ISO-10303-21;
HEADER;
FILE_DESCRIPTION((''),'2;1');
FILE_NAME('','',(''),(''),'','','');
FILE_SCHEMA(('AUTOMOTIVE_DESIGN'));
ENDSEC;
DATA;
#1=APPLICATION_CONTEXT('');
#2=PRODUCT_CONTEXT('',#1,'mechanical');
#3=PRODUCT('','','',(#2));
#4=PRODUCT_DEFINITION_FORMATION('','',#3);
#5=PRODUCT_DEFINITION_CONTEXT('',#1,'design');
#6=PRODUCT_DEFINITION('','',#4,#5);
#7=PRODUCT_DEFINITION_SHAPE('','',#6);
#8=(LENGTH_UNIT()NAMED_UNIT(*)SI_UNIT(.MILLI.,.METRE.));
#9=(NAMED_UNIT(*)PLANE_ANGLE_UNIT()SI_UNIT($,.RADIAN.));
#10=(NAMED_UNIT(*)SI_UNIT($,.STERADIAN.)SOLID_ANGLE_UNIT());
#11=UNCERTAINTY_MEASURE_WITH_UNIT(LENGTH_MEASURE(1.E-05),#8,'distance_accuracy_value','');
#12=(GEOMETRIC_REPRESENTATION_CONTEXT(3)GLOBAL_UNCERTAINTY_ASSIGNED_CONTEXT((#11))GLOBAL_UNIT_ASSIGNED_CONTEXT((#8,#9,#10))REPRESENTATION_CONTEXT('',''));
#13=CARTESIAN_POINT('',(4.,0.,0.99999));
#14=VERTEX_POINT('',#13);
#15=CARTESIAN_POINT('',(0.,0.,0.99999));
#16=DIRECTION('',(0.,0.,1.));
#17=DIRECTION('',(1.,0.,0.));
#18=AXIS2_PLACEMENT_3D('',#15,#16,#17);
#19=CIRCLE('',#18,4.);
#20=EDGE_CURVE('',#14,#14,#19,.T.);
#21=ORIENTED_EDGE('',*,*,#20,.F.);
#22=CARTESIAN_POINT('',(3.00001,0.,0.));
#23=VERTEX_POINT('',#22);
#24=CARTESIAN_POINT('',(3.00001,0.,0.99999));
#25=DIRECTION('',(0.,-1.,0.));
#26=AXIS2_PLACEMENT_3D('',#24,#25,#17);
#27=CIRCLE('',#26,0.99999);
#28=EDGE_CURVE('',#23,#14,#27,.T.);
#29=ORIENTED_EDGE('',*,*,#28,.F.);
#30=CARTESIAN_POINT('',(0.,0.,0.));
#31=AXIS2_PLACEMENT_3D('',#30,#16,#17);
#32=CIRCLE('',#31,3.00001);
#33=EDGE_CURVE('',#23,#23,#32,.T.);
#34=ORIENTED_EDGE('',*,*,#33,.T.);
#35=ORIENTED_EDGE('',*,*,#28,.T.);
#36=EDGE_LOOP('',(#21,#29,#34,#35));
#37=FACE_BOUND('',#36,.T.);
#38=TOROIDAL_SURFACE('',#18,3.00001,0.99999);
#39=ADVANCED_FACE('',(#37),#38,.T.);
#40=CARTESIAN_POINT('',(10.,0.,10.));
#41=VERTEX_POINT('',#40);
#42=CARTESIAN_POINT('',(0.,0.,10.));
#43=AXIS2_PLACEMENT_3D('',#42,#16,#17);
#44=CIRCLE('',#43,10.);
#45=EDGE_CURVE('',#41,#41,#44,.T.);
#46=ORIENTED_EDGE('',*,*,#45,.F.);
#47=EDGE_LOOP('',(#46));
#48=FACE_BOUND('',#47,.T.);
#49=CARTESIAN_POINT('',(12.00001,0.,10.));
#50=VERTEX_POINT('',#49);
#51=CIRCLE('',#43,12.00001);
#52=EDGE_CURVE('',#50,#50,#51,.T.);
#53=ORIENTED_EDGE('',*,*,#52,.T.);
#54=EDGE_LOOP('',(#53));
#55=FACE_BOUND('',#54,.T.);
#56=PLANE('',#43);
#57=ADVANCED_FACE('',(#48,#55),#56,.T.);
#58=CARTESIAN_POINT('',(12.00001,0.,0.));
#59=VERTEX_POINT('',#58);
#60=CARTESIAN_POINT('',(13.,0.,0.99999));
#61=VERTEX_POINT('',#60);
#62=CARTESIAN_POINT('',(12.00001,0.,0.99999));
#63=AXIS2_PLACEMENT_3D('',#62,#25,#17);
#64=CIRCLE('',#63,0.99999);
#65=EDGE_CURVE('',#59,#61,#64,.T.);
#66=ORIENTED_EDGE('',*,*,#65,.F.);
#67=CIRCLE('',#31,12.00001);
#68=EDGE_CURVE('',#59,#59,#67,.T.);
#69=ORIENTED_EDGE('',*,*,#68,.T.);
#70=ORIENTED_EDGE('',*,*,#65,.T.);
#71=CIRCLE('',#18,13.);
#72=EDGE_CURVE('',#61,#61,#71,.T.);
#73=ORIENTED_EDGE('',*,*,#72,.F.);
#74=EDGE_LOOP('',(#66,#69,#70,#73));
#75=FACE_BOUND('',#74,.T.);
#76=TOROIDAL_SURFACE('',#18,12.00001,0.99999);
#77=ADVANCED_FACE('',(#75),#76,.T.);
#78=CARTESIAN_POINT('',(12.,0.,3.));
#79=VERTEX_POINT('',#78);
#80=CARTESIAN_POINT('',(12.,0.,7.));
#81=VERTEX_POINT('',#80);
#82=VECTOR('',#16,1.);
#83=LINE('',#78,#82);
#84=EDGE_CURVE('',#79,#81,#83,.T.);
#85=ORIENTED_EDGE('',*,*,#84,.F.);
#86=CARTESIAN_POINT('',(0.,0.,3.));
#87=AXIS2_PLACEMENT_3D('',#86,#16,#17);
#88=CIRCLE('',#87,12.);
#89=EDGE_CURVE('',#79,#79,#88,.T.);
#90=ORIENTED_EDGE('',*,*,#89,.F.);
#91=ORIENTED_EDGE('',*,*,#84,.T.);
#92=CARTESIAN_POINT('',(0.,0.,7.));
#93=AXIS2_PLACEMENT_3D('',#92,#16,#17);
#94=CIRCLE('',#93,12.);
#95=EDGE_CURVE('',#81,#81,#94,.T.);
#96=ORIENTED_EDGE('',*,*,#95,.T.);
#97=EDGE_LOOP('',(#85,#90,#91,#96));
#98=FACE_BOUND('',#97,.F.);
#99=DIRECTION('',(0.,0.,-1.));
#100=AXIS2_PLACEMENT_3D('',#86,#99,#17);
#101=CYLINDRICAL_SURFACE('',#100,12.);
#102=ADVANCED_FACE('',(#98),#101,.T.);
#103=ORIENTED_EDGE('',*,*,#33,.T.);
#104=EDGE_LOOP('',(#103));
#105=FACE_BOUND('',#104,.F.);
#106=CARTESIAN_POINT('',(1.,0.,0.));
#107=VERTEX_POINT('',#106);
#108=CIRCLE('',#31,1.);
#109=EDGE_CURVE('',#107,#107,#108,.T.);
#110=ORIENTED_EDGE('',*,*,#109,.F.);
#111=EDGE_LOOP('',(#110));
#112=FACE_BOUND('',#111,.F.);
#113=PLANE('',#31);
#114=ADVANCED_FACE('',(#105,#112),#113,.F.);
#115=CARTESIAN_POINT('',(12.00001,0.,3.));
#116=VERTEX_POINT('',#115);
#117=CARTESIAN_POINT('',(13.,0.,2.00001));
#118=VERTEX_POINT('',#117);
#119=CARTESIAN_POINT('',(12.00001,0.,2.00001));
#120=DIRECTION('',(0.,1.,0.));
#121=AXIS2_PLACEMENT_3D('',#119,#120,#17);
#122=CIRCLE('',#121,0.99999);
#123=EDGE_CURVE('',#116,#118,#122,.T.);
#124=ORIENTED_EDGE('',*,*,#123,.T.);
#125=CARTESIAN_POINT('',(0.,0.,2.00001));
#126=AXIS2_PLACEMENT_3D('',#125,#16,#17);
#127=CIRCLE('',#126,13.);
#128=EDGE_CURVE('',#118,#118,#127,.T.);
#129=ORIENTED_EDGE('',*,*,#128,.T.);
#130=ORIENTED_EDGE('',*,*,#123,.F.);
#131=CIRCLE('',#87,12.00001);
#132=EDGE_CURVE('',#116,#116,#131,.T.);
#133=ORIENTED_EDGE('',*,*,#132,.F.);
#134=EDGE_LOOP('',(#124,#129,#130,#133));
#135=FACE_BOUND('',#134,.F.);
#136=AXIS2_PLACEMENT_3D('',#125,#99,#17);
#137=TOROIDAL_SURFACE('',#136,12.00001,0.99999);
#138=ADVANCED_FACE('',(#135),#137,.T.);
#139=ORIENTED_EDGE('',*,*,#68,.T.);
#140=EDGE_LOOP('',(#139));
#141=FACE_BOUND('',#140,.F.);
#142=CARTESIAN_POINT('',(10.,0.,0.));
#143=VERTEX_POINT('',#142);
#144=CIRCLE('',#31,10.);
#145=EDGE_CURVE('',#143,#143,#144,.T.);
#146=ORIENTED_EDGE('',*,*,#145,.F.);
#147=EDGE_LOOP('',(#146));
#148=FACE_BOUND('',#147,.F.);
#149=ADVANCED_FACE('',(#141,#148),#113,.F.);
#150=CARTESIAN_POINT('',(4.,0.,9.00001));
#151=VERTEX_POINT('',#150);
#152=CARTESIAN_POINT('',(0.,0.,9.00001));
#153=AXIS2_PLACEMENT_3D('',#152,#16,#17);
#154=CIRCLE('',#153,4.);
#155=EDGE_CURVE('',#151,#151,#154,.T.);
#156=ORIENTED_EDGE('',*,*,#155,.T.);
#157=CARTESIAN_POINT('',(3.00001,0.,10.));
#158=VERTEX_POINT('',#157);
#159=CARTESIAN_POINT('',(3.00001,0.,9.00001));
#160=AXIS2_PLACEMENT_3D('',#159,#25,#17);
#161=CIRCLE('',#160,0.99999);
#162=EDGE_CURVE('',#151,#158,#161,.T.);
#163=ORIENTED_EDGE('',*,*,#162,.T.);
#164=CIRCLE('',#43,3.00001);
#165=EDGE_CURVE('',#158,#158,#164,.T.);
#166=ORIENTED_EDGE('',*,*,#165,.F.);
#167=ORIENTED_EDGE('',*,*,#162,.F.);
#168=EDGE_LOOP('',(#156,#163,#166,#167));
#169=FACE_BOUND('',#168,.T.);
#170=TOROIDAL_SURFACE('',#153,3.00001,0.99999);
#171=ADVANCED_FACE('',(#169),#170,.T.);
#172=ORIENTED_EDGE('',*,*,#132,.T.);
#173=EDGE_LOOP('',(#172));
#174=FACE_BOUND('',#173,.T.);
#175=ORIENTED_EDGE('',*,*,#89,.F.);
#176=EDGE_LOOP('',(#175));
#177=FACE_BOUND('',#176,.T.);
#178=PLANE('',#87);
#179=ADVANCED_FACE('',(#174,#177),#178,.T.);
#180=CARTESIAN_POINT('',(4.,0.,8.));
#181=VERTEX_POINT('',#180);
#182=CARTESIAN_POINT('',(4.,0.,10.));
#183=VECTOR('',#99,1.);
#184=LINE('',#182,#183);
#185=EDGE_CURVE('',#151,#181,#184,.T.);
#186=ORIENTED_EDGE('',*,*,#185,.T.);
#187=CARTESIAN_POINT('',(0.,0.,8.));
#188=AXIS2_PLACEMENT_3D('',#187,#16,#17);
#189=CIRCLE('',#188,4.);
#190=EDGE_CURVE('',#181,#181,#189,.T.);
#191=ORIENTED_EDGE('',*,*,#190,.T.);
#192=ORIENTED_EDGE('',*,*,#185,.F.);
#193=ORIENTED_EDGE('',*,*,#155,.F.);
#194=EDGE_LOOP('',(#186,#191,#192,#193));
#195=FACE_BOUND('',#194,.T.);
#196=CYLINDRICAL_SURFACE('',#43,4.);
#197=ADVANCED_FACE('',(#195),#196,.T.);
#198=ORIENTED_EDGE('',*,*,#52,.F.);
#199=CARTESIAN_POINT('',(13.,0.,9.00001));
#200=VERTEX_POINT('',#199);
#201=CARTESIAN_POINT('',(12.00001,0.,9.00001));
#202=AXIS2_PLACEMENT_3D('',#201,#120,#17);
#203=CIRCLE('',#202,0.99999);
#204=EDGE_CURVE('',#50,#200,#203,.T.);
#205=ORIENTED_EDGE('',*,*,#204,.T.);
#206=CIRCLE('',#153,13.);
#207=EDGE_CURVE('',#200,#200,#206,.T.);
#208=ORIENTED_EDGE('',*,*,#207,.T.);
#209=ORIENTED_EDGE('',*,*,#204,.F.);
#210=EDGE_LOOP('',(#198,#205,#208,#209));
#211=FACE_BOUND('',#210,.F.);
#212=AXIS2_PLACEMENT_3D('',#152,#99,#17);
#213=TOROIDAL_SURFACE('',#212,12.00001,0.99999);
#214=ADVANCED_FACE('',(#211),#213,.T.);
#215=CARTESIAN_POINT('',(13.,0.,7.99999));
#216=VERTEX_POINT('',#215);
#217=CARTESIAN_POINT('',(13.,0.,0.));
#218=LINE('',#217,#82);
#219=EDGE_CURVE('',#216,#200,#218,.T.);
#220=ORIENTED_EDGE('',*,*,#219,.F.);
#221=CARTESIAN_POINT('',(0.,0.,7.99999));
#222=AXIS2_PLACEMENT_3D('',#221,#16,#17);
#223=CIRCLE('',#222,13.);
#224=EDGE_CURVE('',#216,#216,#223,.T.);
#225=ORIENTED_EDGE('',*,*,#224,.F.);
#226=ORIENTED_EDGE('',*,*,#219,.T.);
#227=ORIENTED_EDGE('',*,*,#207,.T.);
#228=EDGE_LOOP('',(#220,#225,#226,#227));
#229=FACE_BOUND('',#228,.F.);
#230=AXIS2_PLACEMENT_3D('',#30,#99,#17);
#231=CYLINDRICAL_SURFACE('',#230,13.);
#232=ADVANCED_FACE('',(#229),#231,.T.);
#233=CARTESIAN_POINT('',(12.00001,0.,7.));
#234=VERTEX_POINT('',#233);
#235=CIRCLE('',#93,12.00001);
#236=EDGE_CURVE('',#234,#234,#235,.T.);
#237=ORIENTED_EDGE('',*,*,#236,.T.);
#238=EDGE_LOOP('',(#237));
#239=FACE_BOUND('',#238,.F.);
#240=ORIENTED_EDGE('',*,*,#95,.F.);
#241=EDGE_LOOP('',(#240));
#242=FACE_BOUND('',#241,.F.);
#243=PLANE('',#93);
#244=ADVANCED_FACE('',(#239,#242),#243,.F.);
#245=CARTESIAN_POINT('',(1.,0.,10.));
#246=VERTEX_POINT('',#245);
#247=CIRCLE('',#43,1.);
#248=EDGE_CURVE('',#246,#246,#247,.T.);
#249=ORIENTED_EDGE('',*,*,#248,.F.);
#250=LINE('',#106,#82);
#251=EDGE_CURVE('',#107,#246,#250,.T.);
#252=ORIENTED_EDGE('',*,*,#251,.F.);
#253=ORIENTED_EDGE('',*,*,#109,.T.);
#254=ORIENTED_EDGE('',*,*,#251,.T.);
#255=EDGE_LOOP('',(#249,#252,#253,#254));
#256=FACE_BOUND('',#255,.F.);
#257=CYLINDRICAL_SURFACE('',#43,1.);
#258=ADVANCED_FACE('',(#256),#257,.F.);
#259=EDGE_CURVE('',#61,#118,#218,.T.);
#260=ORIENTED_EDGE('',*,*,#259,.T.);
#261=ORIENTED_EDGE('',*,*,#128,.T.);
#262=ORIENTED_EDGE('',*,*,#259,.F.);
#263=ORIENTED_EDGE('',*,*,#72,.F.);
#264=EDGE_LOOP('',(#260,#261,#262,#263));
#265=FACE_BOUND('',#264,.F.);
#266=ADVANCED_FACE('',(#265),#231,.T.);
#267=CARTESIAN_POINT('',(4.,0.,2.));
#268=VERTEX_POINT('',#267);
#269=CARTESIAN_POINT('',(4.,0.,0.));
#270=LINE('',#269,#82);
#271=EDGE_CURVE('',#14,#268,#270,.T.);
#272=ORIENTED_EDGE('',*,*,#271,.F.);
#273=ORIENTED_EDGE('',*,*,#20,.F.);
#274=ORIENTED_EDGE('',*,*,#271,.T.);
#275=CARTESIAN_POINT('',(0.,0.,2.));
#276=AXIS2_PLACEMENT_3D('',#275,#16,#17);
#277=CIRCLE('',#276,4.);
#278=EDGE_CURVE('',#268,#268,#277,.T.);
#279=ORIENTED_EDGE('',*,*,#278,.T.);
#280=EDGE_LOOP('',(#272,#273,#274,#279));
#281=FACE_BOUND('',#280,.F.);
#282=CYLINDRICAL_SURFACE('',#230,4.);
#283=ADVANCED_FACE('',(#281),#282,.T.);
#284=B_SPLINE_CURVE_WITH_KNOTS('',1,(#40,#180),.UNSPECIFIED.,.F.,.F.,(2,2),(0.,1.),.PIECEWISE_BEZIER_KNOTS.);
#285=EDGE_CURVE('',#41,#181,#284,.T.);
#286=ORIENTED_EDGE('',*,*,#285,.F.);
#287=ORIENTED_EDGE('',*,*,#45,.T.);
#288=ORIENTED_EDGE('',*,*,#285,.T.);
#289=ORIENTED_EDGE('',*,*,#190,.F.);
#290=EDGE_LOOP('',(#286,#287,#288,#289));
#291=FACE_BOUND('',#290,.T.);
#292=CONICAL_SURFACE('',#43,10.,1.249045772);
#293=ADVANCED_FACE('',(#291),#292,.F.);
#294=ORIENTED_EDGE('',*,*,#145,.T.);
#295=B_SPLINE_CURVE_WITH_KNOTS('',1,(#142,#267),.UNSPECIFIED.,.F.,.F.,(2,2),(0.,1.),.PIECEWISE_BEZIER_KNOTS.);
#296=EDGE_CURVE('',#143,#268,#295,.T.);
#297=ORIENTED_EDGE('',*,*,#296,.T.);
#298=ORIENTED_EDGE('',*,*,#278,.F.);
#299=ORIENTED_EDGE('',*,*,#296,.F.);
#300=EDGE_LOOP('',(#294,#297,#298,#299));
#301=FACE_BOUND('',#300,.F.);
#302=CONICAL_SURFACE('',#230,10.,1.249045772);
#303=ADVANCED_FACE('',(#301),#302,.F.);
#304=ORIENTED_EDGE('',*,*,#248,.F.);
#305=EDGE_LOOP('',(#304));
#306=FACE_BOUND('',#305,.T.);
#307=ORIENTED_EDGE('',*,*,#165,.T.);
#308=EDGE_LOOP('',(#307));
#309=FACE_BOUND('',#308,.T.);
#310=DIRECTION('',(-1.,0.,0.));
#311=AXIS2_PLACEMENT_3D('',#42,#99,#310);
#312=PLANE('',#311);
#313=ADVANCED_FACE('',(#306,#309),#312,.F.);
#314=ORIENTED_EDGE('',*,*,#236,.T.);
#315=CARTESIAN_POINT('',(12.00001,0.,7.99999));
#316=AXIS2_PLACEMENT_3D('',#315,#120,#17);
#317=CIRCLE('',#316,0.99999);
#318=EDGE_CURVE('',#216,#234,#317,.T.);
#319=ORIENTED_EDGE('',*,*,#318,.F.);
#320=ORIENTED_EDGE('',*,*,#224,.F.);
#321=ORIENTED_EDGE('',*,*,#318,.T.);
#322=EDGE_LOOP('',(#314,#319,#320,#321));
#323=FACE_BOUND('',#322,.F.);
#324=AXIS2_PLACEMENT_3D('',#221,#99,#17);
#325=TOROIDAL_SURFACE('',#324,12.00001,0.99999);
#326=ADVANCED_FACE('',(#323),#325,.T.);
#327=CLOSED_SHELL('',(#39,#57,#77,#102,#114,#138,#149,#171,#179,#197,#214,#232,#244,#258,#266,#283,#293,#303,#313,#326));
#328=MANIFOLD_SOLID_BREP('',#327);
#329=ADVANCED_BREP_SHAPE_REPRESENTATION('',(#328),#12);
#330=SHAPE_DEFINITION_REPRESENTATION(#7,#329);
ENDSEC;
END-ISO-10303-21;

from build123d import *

# Parameters (mm, degrees)
F0_R      = 13
F0_R_2    = 1
F1_DEPTH  = 10
F4_R      = 10
F3_R      = 4
F8_R      = 10
F7_R      = 4
F11_R     = 4
F11_R_2   = 1
F12_DEPTH = 2
F14_R     = 13
F14_R_2   = 12
F15_DEPTH = 4
F16_R     = 0.99999


# Not quite as in the source:
# - a fillet or chamfer is up to 0.001 mm smaller than in the source, because OpenCascade refuses the exact size
# - a feature of the source that left no trace in its solid (it failed there, or was rolled back) is left out
# - a pattern or mirror of a feature is missing from the dataset's text; its kind, count and spacing are read off the source's solid


with BuildPart() as f1:
    # F0 (on Top) → F1 (new body)
    with BuildSketch(Plane.XY):
        Circle(F0_R)
        Circle(F0_R_2, mode=Mode.SUBTRACT)
    extrude(amount=F1_DEPTH)

    # F4 (on face) → F5 section 0
    with BuildSketch(Plane.XY.offset(10)):
        Circle(F4_R)
    # F3 (on offset) → F5 section 1
    with BuildSketch(Plane.XY.offset(8)):
        Circle(F3_R)
    loft(mode=Mode.SUBTRACT)

    # F8 (on face) → F9 section 0
    with BuildSketch(Plane.XY):
        Circle(F8_R)
    # F7 (on offset) → F9 section 1
    with BuildSketch(Plane.XY.offset(2)):
        Circle(F7_R)
    loft(mode=Mode.SUBTRACT)

    # F11 (on face) → F12 (join, through all)
    with BuildSketch(Plane.XY):
        Circle(F11_R)
        Circle(F11_R_2, mode=Mode.SUBTRACT)
    f12 = extrude(amount=F12_DEPTH)

    # F12_copies: F12 across plane
    add(f12.mirror(Plane.XY.offset(5)))

    # F14 (on offset) → F15 (cut)
    with BuildSketch(Plane.XY.offset(3)):
        Circle(F14_R)
        Circle(F14_R_2, mode=Mode.SUBTRACT)
    extrude(amount=F15_DEPTH, mode=Mode.SUBTRACT)

    # F16 (radius 1 in the source; OpenCascade refuses exactly that, so slightly less here)
    f16_edges = [f1.edges().sort_by_distance(p)[0] for p in [
        (-4, 0, 0),
        (-13, 0, 10),
        (-13, 0, 0),
        (-13, 0, 7),
        (-13, 0, 3),
        (-4, 0, 10),
    ]]
    fillet(f16_edges, radius=F16_R)


solid = f1.part
